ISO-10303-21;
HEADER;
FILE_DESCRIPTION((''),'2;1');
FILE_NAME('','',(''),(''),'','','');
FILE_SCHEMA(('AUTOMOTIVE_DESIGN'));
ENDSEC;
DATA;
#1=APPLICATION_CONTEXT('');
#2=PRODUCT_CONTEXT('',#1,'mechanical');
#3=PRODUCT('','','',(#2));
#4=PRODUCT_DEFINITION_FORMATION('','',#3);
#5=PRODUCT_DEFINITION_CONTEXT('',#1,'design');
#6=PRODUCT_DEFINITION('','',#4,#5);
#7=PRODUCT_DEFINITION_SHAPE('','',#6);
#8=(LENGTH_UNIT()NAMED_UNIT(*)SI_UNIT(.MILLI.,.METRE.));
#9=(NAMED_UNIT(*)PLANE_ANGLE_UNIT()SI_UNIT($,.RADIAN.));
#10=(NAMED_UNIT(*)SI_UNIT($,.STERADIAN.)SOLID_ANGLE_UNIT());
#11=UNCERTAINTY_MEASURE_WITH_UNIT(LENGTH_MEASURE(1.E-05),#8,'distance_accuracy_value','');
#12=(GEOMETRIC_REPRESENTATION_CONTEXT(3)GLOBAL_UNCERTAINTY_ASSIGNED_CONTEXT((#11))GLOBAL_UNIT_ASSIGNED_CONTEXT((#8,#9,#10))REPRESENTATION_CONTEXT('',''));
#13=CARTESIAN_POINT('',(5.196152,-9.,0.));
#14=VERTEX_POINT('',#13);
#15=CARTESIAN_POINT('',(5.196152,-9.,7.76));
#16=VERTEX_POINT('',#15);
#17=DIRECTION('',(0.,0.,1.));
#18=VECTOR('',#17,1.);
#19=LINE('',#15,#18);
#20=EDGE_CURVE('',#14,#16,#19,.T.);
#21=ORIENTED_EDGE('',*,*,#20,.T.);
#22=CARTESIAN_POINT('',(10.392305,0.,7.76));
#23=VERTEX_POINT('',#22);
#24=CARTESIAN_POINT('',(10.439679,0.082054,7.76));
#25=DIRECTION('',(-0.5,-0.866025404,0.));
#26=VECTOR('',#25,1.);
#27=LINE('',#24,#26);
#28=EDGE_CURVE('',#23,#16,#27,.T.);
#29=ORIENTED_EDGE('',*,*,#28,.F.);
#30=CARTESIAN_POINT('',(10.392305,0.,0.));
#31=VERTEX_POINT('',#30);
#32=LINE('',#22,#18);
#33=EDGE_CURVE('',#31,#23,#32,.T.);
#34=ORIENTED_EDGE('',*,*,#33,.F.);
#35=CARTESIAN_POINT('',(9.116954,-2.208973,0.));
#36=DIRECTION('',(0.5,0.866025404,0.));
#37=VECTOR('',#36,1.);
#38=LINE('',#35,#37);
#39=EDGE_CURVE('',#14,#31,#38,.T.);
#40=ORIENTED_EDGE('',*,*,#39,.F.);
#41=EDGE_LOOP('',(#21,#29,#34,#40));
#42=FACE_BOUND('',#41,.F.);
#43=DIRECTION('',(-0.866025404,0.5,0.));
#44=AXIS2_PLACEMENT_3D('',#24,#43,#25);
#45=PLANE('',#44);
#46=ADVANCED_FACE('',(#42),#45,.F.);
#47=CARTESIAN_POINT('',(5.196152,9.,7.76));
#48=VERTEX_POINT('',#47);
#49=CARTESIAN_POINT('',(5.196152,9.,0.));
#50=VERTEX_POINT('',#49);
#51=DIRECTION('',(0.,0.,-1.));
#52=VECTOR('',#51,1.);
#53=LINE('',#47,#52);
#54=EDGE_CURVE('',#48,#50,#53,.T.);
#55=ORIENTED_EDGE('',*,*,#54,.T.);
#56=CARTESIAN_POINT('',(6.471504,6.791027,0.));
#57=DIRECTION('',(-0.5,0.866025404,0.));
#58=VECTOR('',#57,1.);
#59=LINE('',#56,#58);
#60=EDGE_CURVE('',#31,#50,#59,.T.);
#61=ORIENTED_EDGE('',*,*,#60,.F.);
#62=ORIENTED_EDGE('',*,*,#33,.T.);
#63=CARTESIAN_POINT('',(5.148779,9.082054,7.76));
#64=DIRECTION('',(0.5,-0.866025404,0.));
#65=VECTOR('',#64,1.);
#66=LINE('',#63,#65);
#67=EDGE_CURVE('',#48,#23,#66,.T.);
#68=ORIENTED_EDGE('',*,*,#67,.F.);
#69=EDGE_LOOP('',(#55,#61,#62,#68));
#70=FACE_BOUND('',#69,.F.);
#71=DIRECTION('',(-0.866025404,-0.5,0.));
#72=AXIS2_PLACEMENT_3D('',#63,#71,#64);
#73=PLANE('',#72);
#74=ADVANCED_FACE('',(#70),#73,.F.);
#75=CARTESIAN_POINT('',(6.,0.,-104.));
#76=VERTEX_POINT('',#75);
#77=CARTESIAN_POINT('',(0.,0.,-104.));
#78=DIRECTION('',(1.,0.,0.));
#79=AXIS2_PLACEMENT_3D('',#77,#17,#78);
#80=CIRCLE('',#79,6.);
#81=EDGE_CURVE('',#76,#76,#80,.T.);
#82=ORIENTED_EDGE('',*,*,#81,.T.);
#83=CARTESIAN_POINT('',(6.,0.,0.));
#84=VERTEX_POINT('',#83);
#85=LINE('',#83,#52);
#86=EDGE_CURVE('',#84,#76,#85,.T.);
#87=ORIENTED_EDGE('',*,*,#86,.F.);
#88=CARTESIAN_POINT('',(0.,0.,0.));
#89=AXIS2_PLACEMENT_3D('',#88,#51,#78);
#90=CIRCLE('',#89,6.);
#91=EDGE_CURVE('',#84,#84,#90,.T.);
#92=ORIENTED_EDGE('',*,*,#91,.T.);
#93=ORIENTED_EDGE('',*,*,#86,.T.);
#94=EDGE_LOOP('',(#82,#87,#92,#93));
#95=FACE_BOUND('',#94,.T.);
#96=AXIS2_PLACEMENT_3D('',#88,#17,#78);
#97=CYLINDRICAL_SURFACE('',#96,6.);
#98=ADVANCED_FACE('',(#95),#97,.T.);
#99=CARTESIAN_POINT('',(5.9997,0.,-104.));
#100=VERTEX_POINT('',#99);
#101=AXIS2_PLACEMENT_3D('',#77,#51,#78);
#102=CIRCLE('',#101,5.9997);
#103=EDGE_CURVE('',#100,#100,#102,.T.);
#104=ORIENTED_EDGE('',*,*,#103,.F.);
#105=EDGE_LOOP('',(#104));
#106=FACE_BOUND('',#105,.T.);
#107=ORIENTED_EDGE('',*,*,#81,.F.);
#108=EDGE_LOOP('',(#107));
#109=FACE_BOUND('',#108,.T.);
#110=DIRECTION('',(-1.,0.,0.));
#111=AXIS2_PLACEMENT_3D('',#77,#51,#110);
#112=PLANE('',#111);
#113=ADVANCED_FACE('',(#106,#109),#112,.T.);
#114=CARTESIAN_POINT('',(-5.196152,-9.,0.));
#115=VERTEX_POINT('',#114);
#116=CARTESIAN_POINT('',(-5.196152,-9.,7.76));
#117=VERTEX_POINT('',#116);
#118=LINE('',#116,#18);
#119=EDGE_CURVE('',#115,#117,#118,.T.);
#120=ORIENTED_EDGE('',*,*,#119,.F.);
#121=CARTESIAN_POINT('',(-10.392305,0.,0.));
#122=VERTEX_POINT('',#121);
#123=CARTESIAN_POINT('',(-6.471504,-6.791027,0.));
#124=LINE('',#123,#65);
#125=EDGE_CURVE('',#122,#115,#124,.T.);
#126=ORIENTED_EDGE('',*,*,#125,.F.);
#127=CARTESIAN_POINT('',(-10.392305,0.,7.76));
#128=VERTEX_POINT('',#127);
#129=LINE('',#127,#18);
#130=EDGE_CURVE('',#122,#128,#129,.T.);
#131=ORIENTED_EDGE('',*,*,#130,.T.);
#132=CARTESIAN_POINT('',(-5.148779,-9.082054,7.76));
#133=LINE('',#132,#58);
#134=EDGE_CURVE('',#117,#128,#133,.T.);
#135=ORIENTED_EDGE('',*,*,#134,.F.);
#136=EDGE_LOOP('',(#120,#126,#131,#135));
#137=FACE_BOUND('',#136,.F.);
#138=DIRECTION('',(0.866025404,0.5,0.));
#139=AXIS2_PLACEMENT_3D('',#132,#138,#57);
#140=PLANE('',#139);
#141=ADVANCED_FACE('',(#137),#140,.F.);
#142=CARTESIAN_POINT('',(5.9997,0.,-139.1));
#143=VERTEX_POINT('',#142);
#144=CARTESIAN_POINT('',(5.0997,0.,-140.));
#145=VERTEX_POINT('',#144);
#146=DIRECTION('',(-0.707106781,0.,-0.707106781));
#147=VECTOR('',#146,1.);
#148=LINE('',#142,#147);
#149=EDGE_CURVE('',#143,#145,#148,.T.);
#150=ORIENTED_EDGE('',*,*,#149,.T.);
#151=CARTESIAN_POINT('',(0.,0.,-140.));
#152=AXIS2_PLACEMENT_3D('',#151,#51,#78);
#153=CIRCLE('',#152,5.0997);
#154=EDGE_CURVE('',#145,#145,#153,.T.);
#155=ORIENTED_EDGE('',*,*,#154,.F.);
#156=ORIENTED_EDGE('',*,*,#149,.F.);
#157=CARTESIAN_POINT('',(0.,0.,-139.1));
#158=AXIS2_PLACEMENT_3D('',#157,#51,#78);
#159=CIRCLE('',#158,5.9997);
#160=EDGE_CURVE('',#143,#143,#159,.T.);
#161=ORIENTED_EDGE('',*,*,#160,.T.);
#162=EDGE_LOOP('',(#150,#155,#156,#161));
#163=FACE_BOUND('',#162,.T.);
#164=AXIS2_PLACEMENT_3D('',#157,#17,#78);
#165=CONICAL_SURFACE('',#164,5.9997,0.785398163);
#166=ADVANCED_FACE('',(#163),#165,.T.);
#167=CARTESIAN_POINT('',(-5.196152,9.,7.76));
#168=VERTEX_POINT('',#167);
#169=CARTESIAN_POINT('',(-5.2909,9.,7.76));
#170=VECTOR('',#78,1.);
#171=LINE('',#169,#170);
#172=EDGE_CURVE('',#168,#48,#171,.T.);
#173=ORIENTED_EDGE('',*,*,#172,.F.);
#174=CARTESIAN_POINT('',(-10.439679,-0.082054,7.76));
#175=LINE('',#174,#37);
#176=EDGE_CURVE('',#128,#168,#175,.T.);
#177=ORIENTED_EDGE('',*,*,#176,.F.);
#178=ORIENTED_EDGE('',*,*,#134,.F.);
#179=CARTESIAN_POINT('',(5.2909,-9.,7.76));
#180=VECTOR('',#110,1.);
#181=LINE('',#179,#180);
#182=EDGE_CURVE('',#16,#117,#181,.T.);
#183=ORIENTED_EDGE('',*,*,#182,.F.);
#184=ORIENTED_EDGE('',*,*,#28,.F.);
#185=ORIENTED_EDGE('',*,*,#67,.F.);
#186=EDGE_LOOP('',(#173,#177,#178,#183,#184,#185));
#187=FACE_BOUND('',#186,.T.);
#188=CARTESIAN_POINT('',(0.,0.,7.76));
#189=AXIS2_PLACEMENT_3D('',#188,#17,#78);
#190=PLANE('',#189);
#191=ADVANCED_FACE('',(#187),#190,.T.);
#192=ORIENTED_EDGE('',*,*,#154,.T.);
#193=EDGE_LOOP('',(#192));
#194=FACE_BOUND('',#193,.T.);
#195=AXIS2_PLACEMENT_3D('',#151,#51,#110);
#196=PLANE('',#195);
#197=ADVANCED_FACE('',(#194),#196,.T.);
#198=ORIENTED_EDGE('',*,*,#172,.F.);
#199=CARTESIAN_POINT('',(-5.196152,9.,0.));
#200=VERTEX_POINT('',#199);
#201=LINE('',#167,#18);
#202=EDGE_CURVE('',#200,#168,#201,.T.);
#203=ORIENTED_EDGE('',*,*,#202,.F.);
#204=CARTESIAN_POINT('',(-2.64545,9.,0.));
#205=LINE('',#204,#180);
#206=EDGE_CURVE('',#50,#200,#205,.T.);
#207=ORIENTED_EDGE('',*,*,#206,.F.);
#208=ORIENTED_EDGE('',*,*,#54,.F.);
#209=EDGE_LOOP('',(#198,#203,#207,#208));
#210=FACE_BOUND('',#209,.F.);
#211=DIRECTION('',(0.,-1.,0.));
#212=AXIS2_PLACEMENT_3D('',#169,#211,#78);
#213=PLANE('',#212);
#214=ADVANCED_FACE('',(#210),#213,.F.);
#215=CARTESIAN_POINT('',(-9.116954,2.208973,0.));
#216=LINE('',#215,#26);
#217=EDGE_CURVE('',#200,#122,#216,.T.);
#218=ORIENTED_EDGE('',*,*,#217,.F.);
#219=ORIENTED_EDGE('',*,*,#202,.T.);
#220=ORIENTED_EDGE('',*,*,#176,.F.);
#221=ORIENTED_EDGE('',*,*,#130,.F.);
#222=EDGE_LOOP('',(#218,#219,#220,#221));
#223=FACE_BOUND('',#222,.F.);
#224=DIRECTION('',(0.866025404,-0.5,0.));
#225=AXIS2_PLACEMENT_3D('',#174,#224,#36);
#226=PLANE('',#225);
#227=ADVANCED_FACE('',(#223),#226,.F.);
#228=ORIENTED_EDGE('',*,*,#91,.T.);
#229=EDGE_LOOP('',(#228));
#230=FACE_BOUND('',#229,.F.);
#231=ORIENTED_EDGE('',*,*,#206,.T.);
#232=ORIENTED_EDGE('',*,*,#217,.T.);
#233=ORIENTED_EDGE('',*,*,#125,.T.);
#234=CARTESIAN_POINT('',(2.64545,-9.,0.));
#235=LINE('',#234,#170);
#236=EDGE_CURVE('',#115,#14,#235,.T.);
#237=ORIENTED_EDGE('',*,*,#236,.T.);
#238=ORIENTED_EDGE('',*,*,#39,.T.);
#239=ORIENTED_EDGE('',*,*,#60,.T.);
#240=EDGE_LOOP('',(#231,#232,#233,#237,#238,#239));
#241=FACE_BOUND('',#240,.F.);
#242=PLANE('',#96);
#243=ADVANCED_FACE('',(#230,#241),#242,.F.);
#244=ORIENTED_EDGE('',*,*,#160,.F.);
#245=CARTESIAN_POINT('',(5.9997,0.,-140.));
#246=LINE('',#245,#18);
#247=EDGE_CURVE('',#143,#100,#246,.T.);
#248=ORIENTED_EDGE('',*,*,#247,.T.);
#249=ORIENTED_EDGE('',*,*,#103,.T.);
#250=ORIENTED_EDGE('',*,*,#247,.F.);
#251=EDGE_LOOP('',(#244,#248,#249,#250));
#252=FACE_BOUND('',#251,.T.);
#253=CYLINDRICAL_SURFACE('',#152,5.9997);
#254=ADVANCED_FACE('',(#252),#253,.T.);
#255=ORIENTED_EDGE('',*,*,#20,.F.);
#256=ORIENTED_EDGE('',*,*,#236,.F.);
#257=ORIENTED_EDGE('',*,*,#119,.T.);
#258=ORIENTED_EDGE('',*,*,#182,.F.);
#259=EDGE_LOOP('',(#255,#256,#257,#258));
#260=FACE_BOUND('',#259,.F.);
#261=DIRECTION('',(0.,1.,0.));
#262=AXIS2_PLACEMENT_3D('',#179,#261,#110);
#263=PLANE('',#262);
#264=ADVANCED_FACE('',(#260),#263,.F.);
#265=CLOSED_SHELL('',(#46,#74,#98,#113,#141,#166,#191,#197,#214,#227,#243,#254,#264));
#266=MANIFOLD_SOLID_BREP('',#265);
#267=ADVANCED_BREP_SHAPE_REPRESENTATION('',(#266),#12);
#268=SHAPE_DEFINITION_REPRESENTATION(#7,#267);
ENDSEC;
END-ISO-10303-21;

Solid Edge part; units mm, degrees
sketch "Sketch1" plane through (0, 0, 0) normal (0, 0, 1) x (1, 0, 0)
  circle A0 centre (0, 0) radius 10.44
  dimension "D1" = 20.88
extrude "Protrusion1" add sketch "Sketch1" along normal blind 7.76
sketch "Sketch2" plane through (0, 0, 0) normal (0, 0, -1) x (1, 0, 0)
  circle A0 centre (0, 0) radius 6
extrude "Protrusion2" add sketch "Sketch2" along normal blind 140
sketch "Sketch3" plane through (0, 0, -140) normal (0, 0, -1) x (1, 0, 0)
  circle A0 centre (0, 0) radius 5.9997
extrude "Cutout1" cut sketch "Sketch3" against normal blind 36 flip side to cut
chamfer "Chamfer_1" distance 0.9 angle 45 1 edges at (-5.9997, 0, -140)
sketch "Sketch4" plane through (0, 0, 7.76) normal (0, 0, 1) x (1, 0, 0)
  line L0 (-5.2909, 9) -> (5.2909, 9)
  dimension "D1" = 18
extrude "Cutout2" cut sketch "Sketch4" against normal up to next material side at (0, 9.05, 7.76)
pattern_circular "Pattern1" count 6 over 360 about axis through (0, 0, 7.76) along (0, 0, 1) of "Cutout2"
properties part number "24104322"
